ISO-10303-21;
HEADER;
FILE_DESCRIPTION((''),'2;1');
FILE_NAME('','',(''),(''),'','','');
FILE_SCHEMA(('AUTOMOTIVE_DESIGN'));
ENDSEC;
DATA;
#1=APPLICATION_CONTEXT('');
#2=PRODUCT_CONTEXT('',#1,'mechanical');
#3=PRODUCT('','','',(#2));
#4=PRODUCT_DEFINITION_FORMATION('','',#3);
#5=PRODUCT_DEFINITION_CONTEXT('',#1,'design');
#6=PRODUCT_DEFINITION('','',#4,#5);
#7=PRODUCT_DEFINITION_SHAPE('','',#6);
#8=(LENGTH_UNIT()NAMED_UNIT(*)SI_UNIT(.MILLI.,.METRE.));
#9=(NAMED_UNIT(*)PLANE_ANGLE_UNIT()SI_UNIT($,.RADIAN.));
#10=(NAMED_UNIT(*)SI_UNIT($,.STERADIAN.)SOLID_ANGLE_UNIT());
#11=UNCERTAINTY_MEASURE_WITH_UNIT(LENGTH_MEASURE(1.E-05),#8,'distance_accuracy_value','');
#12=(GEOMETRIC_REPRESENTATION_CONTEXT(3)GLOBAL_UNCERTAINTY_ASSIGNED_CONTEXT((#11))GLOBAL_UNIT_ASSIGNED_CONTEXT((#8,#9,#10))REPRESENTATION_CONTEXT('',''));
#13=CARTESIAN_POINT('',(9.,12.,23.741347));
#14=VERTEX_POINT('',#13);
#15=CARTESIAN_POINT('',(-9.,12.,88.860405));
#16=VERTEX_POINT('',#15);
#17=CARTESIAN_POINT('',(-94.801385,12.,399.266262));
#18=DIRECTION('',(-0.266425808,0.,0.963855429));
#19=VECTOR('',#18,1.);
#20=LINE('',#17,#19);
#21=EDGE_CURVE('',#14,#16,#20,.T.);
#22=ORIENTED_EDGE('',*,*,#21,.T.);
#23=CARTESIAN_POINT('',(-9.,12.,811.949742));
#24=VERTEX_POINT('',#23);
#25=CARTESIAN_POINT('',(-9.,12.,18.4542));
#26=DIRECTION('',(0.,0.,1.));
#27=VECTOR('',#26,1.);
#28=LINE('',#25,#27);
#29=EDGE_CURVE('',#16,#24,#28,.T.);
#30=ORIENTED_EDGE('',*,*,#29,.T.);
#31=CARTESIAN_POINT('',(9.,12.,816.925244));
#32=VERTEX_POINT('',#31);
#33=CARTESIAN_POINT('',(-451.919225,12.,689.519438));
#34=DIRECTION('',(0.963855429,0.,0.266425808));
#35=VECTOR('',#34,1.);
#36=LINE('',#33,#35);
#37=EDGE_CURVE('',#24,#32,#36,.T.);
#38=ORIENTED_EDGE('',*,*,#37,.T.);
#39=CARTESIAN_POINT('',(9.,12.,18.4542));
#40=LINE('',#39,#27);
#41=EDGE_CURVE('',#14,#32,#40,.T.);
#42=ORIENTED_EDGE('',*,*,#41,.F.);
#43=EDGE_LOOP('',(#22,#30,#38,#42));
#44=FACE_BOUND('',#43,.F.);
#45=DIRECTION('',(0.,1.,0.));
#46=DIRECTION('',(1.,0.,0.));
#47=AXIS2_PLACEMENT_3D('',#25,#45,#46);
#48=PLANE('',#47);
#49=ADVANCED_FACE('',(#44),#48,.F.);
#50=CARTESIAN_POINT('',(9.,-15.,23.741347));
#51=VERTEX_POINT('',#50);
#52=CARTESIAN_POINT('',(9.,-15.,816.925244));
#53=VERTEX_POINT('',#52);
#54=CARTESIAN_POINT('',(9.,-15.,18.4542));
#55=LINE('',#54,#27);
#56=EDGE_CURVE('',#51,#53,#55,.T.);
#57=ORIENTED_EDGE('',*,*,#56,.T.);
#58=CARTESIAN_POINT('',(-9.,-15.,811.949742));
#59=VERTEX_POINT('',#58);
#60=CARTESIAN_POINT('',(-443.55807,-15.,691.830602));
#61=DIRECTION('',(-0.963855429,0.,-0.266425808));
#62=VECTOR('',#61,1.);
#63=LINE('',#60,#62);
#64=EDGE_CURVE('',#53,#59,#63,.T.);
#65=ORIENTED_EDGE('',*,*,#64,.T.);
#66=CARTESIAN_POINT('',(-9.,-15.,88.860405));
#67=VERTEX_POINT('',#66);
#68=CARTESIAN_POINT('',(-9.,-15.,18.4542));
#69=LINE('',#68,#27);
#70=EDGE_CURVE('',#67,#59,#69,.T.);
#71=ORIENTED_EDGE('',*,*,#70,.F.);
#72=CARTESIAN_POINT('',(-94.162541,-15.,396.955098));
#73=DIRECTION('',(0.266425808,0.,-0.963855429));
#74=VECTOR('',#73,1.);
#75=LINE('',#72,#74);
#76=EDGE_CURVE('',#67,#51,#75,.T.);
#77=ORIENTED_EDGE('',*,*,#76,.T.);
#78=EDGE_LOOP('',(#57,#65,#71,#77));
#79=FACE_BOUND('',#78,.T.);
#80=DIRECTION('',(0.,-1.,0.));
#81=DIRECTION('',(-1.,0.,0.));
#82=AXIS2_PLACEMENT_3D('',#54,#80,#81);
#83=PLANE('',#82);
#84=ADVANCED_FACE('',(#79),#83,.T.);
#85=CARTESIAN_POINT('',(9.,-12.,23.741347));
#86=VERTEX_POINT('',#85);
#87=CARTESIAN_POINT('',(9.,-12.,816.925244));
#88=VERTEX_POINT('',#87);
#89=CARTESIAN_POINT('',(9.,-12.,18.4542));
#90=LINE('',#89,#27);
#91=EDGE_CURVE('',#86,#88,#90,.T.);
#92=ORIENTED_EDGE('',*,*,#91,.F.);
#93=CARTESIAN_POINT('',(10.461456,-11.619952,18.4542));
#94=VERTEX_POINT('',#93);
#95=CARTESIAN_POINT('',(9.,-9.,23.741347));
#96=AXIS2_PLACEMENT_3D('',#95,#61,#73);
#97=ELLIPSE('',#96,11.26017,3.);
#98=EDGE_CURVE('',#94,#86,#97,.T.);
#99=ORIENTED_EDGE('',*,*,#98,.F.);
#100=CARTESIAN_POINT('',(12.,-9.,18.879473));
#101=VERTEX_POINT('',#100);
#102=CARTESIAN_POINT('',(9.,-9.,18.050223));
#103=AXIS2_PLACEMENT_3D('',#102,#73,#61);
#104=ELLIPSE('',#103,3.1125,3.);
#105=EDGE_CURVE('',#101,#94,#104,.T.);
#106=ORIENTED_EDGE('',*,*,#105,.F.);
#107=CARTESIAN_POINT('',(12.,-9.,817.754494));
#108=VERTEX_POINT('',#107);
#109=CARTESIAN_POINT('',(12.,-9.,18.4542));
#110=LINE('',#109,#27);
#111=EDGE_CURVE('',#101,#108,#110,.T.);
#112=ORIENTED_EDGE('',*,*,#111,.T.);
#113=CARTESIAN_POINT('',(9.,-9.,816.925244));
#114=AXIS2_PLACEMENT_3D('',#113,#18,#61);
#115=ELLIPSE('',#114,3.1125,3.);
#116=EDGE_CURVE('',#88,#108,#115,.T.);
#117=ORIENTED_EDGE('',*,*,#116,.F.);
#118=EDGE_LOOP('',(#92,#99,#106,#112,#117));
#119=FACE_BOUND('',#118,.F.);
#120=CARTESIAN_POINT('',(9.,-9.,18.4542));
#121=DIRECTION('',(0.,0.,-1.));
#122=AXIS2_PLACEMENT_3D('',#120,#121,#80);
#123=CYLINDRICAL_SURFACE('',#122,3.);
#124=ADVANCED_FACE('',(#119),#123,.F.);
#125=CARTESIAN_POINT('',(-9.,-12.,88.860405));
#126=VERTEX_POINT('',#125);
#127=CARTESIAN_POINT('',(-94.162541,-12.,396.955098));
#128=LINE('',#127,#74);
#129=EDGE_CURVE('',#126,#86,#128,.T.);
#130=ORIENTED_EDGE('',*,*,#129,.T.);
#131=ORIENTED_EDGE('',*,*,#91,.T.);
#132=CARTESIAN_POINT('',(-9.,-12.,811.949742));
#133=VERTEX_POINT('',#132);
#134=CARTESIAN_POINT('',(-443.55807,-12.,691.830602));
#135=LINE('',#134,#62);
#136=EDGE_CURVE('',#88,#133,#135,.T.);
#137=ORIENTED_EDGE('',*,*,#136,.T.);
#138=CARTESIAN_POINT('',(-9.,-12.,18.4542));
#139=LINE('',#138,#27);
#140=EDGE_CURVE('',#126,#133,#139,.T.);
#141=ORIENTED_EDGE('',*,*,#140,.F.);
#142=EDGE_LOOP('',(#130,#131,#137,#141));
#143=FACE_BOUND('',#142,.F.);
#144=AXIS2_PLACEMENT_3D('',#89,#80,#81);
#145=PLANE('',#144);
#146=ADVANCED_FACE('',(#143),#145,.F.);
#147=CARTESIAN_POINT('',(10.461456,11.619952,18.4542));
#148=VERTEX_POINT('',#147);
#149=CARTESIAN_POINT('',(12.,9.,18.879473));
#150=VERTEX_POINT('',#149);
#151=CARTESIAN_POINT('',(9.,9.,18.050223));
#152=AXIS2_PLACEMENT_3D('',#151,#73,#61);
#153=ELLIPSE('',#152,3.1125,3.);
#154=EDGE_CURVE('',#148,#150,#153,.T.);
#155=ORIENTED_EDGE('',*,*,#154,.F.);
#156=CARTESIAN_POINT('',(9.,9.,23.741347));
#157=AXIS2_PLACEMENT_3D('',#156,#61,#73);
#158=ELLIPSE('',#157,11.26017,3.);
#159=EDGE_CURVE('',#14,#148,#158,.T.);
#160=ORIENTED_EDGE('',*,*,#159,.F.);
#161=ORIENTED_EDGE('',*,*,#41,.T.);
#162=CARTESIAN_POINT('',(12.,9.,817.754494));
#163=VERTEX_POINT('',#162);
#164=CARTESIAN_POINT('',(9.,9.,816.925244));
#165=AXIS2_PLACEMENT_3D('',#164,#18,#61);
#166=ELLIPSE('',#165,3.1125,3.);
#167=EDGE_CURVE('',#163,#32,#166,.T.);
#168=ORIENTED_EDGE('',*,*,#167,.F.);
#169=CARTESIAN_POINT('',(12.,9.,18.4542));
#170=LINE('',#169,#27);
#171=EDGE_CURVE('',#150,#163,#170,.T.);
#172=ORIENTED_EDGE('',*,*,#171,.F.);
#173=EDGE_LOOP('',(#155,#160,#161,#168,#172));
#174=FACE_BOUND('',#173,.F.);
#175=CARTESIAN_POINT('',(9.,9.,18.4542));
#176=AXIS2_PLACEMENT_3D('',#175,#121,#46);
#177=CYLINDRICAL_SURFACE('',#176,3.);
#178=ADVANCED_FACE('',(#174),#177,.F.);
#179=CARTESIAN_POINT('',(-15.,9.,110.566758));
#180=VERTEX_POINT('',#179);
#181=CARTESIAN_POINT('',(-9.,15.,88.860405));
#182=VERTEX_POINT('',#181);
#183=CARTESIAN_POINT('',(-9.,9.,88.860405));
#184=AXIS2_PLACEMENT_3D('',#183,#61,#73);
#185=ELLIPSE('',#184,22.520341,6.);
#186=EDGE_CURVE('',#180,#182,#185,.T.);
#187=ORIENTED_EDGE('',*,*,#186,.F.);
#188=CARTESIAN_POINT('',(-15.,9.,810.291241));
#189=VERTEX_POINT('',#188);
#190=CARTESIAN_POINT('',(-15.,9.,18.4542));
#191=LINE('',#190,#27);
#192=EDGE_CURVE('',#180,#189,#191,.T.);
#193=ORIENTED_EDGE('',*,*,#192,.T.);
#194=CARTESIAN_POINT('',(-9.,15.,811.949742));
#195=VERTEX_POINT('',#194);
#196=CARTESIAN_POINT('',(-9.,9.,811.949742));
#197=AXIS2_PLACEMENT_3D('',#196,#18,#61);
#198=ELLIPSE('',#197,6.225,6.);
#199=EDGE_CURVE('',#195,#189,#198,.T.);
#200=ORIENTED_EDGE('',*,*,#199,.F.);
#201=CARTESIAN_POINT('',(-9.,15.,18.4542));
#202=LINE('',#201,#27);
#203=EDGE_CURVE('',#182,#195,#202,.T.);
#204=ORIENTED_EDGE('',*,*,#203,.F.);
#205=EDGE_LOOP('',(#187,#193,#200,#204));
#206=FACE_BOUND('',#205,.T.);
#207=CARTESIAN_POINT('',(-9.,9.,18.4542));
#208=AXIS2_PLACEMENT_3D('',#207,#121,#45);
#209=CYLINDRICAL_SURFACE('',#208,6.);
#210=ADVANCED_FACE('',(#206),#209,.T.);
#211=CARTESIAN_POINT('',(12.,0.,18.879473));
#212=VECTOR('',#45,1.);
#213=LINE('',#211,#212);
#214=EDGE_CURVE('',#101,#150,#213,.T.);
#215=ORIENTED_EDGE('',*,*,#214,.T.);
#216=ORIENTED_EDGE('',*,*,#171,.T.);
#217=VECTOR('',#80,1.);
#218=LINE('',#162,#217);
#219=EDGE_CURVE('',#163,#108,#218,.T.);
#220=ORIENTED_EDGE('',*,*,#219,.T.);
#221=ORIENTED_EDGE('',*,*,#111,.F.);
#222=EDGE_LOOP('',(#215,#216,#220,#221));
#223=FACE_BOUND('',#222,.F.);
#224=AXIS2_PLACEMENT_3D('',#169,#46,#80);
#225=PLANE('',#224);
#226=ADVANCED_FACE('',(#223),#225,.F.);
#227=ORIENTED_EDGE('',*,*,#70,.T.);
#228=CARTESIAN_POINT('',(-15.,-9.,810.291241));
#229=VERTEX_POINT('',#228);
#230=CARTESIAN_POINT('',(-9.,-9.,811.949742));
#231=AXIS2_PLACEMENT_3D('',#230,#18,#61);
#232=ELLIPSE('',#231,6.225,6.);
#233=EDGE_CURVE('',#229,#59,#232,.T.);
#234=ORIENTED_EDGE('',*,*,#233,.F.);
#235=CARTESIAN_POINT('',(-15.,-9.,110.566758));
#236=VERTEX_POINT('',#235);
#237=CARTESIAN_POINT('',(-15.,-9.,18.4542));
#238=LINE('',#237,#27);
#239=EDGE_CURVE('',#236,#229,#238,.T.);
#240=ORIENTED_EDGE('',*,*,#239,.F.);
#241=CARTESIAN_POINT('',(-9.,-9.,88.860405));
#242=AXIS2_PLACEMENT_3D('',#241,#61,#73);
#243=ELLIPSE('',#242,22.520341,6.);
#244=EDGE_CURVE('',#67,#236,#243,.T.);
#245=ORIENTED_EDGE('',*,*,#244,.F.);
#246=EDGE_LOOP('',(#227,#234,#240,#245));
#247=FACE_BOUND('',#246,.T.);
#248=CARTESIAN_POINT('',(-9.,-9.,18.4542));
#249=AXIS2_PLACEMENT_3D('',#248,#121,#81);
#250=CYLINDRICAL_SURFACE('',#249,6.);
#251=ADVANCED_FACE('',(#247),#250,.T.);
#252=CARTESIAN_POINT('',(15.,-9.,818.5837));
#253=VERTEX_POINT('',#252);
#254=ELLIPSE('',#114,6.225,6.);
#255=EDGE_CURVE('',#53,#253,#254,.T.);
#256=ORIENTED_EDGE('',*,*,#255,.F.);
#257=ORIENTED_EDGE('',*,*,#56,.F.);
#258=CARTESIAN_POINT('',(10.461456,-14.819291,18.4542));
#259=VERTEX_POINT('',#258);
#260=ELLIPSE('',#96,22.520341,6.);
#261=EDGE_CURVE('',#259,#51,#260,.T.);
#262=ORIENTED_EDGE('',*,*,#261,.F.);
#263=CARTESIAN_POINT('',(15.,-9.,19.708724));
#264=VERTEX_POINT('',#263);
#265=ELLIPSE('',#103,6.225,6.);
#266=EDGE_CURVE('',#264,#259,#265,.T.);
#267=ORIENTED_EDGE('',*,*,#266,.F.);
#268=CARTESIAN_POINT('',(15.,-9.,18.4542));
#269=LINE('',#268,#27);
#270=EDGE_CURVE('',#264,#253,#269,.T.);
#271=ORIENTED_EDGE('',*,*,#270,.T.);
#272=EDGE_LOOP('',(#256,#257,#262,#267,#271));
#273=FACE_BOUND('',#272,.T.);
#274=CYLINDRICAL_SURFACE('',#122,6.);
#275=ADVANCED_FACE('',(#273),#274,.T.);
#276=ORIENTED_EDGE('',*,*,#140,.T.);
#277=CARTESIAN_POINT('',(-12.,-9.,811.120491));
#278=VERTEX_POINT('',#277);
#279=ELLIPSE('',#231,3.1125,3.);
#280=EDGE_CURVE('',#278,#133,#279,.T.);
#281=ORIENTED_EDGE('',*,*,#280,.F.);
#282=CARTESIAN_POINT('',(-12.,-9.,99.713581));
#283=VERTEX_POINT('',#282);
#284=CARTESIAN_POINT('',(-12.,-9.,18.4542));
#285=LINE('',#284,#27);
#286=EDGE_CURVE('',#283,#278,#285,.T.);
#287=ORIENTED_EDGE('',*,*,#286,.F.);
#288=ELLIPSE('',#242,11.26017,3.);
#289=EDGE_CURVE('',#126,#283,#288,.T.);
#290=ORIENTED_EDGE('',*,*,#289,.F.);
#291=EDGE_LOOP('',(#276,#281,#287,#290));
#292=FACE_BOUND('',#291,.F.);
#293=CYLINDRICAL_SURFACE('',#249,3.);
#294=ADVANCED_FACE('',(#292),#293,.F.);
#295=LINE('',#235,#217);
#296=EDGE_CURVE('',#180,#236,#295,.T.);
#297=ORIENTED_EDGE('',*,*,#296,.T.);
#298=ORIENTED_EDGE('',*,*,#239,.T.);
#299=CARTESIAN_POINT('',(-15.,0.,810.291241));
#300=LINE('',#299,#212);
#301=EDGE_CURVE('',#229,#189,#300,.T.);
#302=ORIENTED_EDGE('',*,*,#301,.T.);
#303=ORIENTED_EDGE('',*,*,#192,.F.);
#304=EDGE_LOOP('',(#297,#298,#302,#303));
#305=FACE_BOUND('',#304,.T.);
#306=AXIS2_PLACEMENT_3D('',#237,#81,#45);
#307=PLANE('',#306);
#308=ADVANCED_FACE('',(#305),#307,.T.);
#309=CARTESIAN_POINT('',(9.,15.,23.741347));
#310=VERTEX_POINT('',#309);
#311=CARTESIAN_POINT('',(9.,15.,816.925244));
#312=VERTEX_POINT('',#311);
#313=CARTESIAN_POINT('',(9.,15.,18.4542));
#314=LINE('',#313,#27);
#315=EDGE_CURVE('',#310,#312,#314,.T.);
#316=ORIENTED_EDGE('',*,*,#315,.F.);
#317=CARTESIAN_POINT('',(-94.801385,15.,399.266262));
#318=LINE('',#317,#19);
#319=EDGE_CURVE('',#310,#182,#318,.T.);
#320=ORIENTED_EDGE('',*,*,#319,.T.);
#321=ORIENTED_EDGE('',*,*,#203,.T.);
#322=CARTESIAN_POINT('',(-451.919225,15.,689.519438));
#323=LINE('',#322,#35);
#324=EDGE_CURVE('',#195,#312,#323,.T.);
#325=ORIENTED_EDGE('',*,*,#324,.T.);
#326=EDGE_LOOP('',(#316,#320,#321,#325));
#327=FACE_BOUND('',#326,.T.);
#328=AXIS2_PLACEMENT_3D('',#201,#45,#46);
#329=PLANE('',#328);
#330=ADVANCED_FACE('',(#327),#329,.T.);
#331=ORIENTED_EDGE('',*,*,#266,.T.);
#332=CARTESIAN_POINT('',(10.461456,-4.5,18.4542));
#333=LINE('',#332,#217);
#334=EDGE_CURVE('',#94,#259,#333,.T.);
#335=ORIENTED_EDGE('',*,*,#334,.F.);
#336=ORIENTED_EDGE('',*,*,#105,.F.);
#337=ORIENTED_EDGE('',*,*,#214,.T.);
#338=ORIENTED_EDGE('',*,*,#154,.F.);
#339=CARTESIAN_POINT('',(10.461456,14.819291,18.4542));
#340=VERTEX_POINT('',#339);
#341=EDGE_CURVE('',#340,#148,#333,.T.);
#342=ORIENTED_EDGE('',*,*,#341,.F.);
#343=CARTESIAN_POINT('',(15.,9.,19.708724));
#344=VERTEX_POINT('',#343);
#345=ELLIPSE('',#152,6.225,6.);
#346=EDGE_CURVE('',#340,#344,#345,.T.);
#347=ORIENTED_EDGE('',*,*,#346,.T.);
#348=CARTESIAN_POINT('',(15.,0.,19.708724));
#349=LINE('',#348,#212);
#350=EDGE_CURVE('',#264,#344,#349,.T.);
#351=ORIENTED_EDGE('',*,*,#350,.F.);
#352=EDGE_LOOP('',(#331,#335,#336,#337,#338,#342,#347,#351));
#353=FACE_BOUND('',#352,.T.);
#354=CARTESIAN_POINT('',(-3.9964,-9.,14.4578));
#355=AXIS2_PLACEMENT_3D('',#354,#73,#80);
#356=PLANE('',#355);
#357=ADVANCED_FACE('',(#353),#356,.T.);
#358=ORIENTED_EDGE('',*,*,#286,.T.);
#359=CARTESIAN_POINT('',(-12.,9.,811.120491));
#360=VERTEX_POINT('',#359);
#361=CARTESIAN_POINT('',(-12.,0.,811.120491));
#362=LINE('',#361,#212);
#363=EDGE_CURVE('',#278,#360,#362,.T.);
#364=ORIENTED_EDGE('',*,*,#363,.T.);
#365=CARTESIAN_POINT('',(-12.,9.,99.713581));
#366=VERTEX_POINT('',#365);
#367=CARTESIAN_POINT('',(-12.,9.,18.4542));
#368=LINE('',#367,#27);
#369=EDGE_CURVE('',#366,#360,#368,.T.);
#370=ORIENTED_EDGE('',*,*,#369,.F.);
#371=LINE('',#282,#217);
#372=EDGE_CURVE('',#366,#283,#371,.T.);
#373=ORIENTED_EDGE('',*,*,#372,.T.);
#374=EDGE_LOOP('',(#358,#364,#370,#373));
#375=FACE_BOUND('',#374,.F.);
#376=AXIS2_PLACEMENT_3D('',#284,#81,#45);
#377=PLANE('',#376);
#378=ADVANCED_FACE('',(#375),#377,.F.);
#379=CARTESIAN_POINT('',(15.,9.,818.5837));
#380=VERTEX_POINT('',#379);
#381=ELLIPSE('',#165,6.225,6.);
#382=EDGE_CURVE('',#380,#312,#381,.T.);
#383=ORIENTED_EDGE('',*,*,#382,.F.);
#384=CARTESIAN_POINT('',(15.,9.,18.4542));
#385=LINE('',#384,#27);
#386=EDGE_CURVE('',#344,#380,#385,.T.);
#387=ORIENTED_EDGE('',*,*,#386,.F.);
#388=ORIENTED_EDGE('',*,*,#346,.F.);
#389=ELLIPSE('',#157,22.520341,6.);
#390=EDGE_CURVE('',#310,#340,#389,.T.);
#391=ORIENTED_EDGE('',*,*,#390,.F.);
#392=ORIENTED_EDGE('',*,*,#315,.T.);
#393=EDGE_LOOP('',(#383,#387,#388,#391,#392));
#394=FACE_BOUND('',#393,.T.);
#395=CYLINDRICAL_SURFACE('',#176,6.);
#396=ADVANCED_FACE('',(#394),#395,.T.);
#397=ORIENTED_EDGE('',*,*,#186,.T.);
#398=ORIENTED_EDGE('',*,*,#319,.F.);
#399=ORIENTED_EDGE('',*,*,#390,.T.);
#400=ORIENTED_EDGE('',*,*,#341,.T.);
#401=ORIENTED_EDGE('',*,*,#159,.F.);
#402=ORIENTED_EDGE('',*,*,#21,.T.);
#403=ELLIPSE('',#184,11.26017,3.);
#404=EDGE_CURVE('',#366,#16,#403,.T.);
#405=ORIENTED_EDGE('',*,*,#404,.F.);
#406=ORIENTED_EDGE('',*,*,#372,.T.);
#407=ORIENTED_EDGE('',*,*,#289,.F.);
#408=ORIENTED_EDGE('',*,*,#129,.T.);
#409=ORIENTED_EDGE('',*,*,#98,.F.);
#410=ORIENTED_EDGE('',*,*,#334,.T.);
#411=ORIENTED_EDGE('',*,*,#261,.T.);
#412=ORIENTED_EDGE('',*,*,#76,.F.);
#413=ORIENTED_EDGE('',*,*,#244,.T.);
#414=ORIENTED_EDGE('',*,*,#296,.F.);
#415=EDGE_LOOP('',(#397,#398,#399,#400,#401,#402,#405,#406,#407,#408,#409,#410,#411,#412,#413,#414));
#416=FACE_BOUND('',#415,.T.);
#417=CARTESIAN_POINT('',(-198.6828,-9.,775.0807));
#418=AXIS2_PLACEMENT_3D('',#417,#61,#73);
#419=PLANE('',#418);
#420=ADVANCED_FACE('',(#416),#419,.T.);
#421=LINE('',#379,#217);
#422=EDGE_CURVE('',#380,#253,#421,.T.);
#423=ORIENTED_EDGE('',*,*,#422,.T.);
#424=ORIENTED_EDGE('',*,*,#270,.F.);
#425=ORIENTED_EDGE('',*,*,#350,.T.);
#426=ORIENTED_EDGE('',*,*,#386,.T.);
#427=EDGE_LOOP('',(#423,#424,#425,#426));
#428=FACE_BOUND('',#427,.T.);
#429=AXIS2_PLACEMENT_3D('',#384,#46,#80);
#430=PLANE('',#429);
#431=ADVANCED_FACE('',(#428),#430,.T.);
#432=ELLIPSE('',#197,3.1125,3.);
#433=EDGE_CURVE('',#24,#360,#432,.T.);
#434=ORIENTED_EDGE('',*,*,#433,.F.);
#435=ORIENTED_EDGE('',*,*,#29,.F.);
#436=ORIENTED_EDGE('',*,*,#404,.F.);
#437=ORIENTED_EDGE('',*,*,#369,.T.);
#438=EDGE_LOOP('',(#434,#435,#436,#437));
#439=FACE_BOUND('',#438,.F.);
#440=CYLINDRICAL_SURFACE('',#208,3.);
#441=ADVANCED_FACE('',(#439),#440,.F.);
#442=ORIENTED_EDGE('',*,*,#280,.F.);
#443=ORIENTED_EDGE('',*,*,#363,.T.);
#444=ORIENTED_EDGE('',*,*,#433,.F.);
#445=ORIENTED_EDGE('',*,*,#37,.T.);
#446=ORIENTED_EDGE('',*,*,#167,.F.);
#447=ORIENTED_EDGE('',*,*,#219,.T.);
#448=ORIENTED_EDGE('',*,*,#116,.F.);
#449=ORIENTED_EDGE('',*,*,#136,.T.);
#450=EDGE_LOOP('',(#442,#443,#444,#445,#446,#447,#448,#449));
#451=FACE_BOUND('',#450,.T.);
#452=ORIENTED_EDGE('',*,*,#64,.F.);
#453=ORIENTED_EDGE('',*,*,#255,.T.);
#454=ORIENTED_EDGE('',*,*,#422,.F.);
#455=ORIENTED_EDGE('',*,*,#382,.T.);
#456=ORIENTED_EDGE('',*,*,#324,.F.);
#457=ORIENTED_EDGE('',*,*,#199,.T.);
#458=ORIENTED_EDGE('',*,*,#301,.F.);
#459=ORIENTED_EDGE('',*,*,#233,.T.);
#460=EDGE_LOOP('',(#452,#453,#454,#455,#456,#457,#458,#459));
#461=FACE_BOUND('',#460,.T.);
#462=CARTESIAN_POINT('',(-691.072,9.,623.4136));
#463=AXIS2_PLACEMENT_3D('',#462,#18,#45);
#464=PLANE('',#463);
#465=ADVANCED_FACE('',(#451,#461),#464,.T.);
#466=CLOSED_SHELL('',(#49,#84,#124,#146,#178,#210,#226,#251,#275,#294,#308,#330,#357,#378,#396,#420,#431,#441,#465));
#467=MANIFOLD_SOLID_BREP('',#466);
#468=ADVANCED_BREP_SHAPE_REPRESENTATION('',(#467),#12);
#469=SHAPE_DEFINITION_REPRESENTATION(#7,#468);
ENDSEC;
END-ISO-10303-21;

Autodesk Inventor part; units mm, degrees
ref_plane "Start Plane" through (0, 0, 18.4542) normal (0, 0, 1) x (1, 0, 0)
ref_plane "End Plane" through (0, 0, 818.5838) normal (0, 0, 1) x (1, 0, 0)
sketch "Sketch" plane through (0, 0, 0) normal (0, 0, 1) x (1, 0, 0)
  line L0 (-15, -9) -> (-15, 9)
  line L1 (-9, 15) -> (9, 15)
  line L2 (15, 9) -> (15, -9)
  line L3 (9, -15) -> (-9, -15)
  arc A0 (-15, -9) -> (-9, -15) centre (-9, -9) ccw
  arc A1 (-9, 15) -> (-15, 9) centre (-9, 9) ccw
  arc A2 (15, 9) -> (9, 15) centre (9, 9) ccw
  arc A3 (9, -15) -> (15, -9) centre (9, -9) ccw
  arc A4 (-9, 12) -> (-12, 9) centre (-9, 9) ccw
  line L4 (-9, 12) -> (9, 12)
  arc A5 (12, 9) -> (9, 12) centre (9, 9) ccw
  line L5 (12, 9) -> (12, -9)
  arc A6 (9, -12) -> (12, -9) centre (9, -9) ccw
  line L6 (9, -12) -> (-9, -12)
  arc A7 (-12, -9) -> (-9, -12) centre (-9, -9) ccw
  line L7 (-12, -9) -> (-12, 9)
  line L8 (0, 22.7397) -> (0, -22.7397) construction
  line L9 (-22.7397, 0) -> (22.7397, 0) construction
  dimension "d7" = 6
  dimension "d10" = 30
  dimension "d11" = 30
  dimension "d12" = 3
  dimension "d15" = 15
  dimension "d16" = 15
extrude "Body" add sketch "Sketch" along normal up to surface (800.1295 mm away) from surface at 18.4542
sketch "Sketch3" plane through (0, 0, 0) normal (0, 0, 1) x (1, 0, 0)
  line L0 (0, 0) -> (10, 0)
ref_plane "Work Plane3" through (0, 0, 0) normal (0, -1, 0) x (1, 0, 0)
ref_plane "Work Plane4" through (-691.072, 9, 623.4136) normal (-0.2664258, 0, 0.9638554) x (0.9638554, 0, 0.2664258)
split "Split1" plane through (-691.072, 9, 623.4136) removes the side toward (-0.2664258, 0, 0.9638554)
ref_plane "Work Plane5" through (-198.6828, -9, 775.0807) normal (-0.9638554, 0, -0.2664258) x (-0.2664258, 0, 0.9638554)
split "Split2" plane through (-198.6828, -9, 775.0807) removes the side toward (-0.9638554, 0, -0.2664258)
ref_plane "Work Plane6" through (-3.9964, -9, 14.4578) normal (0.2664258, 0, -0.9638554) x (-0.9638554, 0, -0.2664258)
split "Split3" plane through (-3.9964, -9, 14.4578) removes the side toward (0.2664258, 0, -0.9638554)
sketch "Sketch4" plane through (0, 0, 0) normal (0, -1, 0) x (1, 0, 0)
  line L0 (-2, 18.4542) -> (12, 18.4542) projected
  line L1 (-2, 818.5838) -> (12, 818.5838) projected
  dimension "d18" = 800.1295
equation "\"d7\" = G_IR"
equation "\"d10\" = G_H"
equation "\"d11\" = G_W"
equation "\"d12\" = G_T"
equation "\"d15\" = 0.5 * d10"
equation "\"d16\" = 0.5 * d11"
equation "\"d3\" = G_L"
equation "\"G_W\" = 30"
equation "\"G_H\" = 30"
equation "\"G_T\" = 3"
equation "\"G_IR\" = 6"
equation "\"G_L\" = d18"
equation "\"G_OFFSET_START\" = -18.45422"
equation "\"G_OFFSET_END\" = -11.41625"
equation "\"d13\" = -G_OFFSET_START"
equation "\"d14\" = G_OFFSET_END + B_L"
equation "\"B_L\" = 830"
properties part number "DIN EN 10219-2 - 30 x 30 x 3  - 800.13" material "Steel, Mild"
